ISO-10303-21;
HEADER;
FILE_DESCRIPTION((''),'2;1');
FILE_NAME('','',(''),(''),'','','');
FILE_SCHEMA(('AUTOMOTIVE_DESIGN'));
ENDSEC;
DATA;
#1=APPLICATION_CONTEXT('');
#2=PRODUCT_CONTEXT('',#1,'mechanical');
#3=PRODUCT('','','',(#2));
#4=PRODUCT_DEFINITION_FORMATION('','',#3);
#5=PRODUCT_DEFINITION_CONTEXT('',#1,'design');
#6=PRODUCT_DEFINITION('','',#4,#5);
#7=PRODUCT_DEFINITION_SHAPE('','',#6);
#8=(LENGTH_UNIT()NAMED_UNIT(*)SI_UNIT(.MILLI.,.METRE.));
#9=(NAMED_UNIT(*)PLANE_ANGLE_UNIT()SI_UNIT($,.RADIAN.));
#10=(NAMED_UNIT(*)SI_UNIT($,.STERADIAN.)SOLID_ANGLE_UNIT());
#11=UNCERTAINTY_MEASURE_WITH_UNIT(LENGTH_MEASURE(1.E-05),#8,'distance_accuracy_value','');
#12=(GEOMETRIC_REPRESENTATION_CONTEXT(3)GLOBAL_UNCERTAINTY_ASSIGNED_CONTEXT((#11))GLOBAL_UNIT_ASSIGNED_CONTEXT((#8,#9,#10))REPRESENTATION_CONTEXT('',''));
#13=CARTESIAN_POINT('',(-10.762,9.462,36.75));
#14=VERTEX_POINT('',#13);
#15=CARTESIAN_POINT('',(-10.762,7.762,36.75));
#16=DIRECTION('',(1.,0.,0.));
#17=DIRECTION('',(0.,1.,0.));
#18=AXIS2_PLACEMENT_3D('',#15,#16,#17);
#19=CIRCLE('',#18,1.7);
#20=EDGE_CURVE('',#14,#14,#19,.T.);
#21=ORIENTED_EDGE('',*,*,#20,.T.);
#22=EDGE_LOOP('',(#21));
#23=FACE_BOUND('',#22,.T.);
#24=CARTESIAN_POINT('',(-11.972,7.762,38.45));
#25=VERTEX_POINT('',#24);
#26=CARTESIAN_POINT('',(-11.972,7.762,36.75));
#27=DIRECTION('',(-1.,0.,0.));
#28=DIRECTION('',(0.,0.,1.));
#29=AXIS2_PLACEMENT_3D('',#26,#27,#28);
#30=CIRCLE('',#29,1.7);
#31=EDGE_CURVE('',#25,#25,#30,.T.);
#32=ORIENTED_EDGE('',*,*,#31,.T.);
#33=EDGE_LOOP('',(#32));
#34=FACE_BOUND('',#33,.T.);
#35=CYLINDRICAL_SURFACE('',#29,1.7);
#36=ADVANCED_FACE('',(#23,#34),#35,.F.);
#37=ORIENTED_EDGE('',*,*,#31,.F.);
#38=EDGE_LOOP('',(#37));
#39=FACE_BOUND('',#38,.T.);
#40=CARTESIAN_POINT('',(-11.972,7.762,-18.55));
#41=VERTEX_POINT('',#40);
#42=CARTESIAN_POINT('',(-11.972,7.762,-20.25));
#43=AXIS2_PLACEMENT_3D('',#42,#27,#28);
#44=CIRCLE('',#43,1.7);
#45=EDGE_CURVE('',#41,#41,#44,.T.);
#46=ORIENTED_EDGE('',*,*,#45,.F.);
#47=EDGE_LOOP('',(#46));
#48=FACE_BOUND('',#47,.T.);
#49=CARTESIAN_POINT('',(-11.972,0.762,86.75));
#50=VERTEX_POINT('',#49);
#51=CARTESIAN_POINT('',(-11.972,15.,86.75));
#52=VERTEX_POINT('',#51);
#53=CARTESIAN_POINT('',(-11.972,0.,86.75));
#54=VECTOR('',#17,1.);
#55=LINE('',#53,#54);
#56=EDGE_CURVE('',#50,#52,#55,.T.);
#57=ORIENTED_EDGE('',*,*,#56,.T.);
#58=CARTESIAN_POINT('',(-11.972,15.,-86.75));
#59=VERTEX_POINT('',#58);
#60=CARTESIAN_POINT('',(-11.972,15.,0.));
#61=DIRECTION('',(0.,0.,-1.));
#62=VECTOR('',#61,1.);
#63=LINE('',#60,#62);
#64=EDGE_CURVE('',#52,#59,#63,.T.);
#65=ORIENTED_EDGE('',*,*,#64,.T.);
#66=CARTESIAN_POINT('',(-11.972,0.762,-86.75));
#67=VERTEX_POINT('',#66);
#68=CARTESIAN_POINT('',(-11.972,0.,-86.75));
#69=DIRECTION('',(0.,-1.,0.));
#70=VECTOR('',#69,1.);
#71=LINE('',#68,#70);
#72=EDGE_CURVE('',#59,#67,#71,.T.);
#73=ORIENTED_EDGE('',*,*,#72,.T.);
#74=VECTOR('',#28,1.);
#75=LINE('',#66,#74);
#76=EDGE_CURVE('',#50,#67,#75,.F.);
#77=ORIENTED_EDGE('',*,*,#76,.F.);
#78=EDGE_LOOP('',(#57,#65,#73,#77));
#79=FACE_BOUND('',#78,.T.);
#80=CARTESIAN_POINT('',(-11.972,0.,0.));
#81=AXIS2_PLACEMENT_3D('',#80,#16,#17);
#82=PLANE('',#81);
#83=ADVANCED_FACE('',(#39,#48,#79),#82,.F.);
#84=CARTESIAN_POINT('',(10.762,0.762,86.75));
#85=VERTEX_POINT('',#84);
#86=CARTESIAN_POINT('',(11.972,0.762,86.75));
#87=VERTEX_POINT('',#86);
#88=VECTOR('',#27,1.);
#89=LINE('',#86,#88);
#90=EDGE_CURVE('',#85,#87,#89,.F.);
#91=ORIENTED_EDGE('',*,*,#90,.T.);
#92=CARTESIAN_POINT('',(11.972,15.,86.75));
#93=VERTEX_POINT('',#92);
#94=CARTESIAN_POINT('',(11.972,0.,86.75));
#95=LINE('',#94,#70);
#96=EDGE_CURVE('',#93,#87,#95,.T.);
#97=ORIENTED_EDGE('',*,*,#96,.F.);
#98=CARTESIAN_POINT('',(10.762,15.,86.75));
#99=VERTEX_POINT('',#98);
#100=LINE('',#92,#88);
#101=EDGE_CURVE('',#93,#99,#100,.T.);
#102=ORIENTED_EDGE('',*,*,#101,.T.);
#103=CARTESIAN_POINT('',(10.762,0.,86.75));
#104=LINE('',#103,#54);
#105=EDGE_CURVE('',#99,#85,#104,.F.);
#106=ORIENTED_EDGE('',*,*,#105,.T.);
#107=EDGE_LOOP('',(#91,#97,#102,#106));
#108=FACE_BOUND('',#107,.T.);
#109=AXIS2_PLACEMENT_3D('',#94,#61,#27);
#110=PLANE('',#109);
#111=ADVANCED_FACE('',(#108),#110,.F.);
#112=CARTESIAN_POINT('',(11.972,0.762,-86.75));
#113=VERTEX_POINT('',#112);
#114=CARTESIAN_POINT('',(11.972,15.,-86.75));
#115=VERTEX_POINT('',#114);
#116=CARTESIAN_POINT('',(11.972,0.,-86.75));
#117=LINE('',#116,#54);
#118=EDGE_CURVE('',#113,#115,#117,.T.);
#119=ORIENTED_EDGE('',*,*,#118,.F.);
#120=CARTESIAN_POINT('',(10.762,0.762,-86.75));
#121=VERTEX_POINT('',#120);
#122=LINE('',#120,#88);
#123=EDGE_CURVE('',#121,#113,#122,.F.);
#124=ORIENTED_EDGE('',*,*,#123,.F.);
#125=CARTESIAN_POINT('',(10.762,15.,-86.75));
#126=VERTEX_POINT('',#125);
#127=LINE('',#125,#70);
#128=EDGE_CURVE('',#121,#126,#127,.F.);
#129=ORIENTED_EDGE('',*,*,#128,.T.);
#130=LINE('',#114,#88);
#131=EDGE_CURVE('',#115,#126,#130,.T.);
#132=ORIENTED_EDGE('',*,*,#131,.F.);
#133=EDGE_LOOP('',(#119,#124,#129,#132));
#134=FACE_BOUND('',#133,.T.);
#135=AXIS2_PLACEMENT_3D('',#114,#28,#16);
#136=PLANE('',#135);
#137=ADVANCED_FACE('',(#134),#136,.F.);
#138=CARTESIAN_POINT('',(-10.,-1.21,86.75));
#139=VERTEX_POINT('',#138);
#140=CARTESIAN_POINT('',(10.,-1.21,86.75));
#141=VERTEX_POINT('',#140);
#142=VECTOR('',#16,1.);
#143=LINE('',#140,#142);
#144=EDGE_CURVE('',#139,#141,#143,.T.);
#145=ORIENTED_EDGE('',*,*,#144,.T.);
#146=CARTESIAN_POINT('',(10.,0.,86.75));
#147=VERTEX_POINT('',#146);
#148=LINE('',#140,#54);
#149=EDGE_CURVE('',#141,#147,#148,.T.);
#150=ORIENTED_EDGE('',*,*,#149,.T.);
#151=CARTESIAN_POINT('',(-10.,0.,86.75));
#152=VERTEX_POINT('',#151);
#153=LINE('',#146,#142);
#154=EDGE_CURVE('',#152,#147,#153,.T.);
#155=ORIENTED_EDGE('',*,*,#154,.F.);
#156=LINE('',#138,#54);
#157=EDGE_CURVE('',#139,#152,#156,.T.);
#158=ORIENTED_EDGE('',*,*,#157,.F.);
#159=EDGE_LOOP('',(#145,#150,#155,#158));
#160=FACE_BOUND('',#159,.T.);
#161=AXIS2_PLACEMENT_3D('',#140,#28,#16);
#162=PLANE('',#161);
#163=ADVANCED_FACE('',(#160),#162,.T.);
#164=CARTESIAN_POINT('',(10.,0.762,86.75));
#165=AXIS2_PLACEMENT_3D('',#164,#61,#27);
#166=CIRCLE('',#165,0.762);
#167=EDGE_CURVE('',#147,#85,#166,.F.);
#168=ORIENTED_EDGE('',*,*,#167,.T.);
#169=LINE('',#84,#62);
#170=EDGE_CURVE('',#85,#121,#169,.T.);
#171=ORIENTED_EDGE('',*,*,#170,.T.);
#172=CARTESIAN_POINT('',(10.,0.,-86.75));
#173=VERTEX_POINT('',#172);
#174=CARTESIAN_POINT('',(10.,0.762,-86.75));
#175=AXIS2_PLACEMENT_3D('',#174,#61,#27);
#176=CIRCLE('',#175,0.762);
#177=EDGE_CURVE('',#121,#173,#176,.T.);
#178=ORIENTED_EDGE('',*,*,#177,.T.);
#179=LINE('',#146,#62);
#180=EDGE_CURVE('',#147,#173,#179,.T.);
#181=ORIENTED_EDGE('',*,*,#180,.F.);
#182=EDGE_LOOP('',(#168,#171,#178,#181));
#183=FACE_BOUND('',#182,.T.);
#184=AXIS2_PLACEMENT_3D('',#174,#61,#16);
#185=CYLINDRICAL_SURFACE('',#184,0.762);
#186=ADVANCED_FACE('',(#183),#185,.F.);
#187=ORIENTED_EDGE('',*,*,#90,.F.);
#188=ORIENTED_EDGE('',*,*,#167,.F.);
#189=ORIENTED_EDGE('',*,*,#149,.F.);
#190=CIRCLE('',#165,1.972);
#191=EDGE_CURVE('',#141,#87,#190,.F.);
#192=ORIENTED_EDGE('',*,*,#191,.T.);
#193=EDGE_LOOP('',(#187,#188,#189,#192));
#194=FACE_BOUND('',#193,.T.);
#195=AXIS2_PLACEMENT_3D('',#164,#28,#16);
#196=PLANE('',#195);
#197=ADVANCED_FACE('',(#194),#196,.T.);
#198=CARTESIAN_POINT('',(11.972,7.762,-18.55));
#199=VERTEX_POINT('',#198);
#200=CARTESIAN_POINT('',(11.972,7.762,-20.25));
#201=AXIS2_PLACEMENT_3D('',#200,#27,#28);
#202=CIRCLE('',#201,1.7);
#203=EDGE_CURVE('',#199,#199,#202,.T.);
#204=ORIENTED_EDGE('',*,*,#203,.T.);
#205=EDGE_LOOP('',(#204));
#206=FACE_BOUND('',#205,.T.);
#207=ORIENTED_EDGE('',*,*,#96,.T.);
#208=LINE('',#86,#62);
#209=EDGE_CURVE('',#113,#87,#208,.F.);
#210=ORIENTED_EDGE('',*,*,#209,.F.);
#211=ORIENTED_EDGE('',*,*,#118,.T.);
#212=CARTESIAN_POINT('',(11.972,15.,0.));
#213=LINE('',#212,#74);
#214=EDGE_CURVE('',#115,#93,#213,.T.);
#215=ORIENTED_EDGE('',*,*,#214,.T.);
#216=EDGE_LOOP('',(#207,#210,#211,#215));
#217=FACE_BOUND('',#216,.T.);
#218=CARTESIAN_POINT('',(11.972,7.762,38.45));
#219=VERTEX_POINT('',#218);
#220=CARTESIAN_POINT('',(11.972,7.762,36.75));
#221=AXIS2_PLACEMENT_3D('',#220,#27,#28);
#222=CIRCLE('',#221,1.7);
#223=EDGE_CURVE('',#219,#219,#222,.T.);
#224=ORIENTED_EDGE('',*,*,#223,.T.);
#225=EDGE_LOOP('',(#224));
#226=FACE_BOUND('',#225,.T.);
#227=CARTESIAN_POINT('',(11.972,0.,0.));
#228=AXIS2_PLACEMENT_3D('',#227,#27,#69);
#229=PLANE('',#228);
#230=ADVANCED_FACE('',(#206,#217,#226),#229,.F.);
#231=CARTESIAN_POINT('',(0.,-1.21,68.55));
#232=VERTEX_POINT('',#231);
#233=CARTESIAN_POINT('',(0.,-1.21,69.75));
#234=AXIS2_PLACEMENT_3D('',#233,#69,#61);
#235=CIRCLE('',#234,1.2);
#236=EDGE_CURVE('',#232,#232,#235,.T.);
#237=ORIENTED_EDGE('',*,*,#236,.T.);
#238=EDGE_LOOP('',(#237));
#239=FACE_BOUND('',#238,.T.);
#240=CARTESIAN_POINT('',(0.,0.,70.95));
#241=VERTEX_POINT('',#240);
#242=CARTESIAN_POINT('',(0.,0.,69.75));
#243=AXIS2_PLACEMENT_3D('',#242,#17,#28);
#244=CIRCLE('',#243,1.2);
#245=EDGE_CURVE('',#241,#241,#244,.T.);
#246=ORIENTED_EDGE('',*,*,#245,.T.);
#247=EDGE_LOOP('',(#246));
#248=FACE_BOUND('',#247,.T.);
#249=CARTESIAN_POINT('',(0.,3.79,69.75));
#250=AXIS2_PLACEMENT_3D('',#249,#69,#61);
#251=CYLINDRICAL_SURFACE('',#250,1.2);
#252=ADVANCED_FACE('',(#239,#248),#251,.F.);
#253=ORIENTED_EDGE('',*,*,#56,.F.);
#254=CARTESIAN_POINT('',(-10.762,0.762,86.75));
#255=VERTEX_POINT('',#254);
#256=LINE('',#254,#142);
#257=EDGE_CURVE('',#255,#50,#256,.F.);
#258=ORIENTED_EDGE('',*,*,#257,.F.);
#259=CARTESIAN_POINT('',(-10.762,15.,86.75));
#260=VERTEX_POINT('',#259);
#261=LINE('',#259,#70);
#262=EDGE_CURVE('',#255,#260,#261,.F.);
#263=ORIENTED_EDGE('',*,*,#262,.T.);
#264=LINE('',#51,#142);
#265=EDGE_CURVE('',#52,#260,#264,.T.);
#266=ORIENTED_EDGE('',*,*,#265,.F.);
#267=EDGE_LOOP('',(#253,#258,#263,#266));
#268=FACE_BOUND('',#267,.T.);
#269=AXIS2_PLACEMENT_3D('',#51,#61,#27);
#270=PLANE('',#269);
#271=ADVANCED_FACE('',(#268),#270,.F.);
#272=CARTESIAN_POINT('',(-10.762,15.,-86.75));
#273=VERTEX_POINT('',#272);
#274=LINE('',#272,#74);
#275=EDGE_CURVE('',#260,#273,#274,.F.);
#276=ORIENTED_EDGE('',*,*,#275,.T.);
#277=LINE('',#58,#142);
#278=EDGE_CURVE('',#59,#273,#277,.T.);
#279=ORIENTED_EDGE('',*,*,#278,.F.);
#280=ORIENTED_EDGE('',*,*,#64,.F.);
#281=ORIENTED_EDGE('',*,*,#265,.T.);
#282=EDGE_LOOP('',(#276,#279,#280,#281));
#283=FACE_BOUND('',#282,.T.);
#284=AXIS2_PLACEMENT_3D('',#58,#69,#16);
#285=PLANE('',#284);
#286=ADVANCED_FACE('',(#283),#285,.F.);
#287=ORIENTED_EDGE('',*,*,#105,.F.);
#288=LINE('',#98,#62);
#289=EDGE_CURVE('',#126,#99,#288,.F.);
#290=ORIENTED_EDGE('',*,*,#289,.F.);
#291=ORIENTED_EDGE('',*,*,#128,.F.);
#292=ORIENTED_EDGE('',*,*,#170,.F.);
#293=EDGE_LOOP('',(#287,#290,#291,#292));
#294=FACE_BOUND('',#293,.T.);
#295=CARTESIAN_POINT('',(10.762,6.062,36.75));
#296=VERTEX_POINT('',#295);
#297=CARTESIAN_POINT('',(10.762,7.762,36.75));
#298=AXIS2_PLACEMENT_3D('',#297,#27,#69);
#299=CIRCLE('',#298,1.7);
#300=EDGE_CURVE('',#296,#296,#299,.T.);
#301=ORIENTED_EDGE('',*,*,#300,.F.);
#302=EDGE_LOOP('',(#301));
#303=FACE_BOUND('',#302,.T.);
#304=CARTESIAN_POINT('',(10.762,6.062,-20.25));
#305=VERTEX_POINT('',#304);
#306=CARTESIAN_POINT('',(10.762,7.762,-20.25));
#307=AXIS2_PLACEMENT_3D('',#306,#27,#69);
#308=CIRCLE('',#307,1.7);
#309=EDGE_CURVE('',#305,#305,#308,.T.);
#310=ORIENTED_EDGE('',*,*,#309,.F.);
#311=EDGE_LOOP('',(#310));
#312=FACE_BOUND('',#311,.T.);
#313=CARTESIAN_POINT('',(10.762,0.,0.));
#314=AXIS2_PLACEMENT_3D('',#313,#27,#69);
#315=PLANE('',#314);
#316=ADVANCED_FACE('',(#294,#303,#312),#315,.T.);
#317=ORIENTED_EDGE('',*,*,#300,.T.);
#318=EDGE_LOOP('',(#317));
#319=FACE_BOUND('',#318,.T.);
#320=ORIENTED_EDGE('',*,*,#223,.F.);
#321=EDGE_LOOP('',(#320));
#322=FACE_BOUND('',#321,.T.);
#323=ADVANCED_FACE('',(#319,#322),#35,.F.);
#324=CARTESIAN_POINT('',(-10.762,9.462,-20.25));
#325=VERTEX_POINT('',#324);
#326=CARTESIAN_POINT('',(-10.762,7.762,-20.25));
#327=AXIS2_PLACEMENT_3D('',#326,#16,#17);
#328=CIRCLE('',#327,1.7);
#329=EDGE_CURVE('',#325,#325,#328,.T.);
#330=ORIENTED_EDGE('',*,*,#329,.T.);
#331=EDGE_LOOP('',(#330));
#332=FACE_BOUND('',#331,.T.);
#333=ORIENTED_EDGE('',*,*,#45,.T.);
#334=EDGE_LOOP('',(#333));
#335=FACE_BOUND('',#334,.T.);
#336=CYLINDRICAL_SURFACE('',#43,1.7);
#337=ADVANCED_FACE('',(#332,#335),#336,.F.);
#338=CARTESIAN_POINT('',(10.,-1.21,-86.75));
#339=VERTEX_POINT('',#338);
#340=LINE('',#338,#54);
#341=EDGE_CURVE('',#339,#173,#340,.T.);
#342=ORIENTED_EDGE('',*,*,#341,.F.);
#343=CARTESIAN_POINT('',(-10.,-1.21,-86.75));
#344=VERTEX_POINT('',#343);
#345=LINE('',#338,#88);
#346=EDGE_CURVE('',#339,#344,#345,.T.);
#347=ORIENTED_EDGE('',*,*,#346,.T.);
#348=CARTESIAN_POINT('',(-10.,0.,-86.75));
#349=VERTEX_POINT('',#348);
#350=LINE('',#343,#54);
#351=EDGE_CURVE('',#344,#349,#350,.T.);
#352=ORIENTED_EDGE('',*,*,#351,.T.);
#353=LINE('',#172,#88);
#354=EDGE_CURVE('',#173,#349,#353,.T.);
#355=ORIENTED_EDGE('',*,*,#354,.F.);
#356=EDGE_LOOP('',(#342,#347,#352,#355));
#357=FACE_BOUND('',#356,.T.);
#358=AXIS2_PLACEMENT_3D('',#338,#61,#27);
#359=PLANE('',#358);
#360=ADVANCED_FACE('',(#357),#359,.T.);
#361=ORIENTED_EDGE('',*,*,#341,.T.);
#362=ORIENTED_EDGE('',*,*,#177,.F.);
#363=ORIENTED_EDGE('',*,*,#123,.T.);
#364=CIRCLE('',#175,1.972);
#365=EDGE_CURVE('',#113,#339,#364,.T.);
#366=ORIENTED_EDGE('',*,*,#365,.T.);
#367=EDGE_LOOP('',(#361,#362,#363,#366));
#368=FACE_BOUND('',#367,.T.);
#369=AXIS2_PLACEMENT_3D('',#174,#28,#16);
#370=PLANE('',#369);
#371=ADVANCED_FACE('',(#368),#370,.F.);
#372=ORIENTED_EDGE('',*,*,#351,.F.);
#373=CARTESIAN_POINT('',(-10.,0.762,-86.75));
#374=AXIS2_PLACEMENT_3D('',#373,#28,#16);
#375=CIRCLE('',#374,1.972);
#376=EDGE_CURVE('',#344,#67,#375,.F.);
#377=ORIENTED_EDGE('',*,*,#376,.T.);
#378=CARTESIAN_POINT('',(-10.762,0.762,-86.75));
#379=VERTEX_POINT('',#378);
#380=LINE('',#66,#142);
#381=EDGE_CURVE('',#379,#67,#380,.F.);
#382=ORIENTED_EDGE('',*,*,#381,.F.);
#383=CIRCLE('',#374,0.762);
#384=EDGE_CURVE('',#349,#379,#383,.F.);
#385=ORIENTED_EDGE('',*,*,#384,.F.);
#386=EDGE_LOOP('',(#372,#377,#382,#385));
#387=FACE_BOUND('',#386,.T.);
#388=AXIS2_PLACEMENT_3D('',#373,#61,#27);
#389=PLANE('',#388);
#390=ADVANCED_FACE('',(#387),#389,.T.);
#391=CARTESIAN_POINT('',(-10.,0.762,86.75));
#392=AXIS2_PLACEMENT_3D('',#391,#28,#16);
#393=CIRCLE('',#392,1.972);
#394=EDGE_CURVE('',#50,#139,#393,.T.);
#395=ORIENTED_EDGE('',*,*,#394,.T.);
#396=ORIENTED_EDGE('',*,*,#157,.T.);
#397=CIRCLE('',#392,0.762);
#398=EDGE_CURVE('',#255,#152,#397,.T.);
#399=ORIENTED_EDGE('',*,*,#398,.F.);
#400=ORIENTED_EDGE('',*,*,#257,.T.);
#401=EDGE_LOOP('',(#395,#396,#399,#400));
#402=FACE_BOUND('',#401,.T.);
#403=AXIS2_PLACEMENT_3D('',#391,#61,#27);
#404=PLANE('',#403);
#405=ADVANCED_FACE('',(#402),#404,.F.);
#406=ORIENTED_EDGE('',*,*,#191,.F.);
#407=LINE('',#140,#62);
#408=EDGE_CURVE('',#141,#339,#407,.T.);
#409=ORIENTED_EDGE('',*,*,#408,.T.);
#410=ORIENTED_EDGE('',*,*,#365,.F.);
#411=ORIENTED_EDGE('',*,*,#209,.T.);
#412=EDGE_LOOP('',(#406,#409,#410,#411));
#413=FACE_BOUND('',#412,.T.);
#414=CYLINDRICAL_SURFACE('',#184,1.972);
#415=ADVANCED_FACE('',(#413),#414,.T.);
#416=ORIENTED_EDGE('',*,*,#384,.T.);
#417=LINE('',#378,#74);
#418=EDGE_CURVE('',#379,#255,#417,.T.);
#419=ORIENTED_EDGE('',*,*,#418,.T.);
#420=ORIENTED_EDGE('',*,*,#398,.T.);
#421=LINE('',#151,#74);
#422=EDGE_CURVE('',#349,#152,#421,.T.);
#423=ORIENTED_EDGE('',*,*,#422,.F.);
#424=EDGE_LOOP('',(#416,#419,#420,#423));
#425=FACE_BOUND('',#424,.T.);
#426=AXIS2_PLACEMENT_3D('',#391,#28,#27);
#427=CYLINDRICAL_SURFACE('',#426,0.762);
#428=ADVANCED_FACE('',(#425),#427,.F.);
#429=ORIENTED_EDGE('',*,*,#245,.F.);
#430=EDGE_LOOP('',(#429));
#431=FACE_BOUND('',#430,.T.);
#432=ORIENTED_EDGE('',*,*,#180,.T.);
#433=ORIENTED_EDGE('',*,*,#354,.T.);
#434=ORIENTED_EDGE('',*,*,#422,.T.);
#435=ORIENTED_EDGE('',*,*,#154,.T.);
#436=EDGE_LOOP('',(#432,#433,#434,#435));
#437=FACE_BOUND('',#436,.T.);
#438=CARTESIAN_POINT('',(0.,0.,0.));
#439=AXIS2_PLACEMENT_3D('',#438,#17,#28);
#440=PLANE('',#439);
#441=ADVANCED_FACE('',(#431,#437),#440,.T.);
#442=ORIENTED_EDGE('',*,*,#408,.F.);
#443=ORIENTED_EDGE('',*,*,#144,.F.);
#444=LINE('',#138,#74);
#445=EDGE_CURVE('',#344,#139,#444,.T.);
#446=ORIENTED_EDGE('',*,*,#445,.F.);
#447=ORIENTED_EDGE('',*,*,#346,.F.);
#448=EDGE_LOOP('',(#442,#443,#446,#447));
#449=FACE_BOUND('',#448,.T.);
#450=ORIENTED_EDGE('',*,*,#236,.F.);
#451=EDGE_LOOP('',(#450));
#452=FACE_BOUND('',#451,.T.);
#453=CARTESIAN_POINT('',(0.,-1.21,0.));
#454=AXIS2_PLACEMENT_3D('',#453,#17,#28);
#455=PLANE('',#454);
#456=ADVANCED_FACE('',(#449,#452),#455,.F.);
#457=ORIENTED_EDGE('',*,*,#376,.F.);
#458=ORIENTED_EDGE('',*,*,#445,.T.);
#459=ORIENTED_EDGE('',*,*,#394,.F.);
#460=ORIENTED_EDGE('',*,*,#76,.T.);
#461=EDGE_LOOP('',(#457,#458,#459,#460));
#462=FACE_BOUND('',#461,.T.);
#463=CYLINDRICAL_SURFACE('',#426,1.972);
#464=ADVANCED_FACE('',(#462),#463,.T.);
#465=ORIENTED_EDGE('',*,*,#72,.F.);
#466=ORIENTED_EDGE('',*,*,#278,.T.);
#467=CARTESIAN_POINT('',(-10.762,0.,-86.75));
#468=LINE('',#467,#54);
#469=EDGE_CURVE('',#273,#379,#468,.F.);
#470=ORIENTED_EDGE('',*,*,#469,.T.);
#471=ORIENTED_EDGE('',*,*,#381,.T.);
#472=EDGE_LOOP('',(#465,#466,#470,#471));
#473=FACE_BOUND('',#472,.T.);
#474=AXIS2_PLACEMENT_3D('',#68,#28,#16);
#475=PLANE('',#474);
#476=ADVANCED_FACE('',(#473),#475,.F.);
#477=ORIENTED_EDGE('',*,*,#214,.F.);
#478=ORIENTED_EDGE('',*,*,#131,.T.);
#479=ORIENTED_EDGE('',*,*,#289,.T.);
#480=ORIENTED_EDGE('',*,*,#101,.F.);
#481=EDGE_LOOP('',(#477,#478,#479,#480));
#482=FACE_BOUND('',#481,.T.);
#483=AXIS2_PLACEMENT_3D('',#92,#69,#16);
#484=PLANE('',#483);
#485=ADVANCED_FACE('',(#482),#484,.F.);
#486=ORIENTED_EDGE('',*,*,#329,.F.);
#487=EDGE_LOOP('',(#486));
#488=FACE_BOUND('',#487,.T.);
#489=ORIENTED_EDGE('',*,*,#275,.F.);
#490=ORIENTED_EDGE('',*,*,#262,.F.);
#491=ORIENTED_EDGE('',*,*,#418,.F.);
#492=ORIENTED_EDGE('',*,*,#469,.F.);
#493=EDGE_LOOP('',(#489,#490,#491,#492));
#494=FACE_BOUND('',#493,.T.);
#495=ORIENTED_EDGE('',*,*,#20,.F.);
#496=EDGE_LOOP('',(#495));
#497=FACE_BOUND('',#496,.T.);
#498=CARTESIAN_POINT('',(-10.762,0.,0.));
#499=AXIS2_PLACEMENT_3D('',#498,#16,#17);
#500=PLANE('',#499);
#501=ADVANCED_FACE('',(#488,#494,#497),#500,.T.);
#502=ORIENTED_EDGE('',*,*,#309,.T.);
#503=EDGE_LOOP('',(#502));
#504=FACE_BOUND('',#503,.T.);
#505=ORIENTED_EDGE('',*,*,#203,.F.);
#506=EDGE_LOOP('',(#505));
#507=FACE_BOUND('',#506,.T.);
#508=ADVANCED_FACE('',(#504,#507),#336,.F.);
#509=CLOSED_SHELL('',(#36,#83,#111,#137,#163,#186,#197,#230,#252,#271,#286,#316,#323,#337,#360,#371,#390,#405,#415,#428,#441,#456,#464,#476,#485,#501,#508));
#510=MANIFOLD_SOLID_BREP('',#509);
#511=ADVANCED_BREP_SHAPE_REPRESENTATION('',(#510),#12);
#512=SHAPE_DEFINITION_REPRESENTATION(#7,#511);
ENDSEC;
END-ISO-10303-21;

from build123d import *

# Parameters (mm, degrees)
SKETCH1_W            = 20
SKETCH1_H            = 173.5
BASE_FLANGE1_DEPTH   = 1.21
EDGE_FLANGE1_DEPTH   = 173.5
EDGE_FLANGE2_DEPTH   = 173.5
SKETCH14_R           = 1.2
CUT_EXTRUDE1_DEPTH   = 5
M3_CLEARANCE_HOLE1_D = 3.4


# Sheet-metal steps are written as plain solids
with BuildPart() as part:
    # Sketch1 → Base-Flange1 (new body)
    with BuildSketch(Plane(origin=(0, 0, 0), x_dir=(1, 0, 0), z_dir=(0, 1, 0))):
        Rectangle(SKETCH1_W, SKETCH1_H)
    extrude(amount=-BASE_FLANGE1_DEPTH)

    # Edge-Flange1 section (across the edge) → Edge-Flange1 (add)
    with BuildSketch(Plane(origin=(-10.762, 0, -86.75), x_dir=(1, 0, 0), z_dir=(0, 0, 1))):
        with BuildLine():
            Line((-1.21, 0.762), (-1.21, 15))
            Line((-1.21, 15), (0, 15))
            Line((0, 15), (0, 0.762))
            ThreePointArc((0, 0.762), (0.223184633, 0.223184633), (0.762, 0))
            Line((0.762, 0), (0.762, -1.21))
            ThreePointArc((0.762, -1.21), (-0.632414572, -0.632414572), (-1.21, 0.762))
        make_face()
    extrude(amount=EDGE_FLANGE1_DEPTH)

    # Edge-Flange2 section (across the edge) → Edge-Flange2 (add)
    with BuildSketch(Plane(origin=(10.762, 0, 86.75), x_dir=(-1, 0, 0), z_dir=(0, 0, -1))):
        with BuildLine():
            Line((-1.21, 0.762), (-1.21, 15))
            Line((-1.21, 15), (0, 15))
            Line((0, 15), (0, 0.762))
            ThreePointArc((0, 0.762), (0.223184633, 0.223184633), (0.762, 0))
            Line((0.762, 0), (0.762, -1.21))
            ThreePointArc((0.762, -1.21), (-0.632414572, -0.632414572), (-1.21, 0.762))
        make_face()
    extrude(amount=EDGE_FLANGE2_DEPTH)

    # Sketch14 → Cut-Extrude1 (cut)
    with BuildSketch(Plane(origin=(0, -1.21, 0), x_dir=(-1, 0, 0), z_dir=(0, -1, 0))):
        with Locations(Location((0, -69.75, 0), (0, 0, 90))):
            Circle(SKETCH14_R)
    extrude(amount=-CUT_EXTRUDE1_DEPTH, mode=Mode.SUBTRACT)

    # M3 Clearance Hole1 (through all)
    with Locations(Plane(origin=(-11.972, 85.70162808, 15.202320986), x_dir=(0, 0, -1), z_dir=(-1, 0, 0))):
        with Locations((-21.547679014, 77.93962808), (35.452320986, 77.93962808)):
            Hole(M3_CLEARANCE_HOLE1_D / 2)


solid = part.part
